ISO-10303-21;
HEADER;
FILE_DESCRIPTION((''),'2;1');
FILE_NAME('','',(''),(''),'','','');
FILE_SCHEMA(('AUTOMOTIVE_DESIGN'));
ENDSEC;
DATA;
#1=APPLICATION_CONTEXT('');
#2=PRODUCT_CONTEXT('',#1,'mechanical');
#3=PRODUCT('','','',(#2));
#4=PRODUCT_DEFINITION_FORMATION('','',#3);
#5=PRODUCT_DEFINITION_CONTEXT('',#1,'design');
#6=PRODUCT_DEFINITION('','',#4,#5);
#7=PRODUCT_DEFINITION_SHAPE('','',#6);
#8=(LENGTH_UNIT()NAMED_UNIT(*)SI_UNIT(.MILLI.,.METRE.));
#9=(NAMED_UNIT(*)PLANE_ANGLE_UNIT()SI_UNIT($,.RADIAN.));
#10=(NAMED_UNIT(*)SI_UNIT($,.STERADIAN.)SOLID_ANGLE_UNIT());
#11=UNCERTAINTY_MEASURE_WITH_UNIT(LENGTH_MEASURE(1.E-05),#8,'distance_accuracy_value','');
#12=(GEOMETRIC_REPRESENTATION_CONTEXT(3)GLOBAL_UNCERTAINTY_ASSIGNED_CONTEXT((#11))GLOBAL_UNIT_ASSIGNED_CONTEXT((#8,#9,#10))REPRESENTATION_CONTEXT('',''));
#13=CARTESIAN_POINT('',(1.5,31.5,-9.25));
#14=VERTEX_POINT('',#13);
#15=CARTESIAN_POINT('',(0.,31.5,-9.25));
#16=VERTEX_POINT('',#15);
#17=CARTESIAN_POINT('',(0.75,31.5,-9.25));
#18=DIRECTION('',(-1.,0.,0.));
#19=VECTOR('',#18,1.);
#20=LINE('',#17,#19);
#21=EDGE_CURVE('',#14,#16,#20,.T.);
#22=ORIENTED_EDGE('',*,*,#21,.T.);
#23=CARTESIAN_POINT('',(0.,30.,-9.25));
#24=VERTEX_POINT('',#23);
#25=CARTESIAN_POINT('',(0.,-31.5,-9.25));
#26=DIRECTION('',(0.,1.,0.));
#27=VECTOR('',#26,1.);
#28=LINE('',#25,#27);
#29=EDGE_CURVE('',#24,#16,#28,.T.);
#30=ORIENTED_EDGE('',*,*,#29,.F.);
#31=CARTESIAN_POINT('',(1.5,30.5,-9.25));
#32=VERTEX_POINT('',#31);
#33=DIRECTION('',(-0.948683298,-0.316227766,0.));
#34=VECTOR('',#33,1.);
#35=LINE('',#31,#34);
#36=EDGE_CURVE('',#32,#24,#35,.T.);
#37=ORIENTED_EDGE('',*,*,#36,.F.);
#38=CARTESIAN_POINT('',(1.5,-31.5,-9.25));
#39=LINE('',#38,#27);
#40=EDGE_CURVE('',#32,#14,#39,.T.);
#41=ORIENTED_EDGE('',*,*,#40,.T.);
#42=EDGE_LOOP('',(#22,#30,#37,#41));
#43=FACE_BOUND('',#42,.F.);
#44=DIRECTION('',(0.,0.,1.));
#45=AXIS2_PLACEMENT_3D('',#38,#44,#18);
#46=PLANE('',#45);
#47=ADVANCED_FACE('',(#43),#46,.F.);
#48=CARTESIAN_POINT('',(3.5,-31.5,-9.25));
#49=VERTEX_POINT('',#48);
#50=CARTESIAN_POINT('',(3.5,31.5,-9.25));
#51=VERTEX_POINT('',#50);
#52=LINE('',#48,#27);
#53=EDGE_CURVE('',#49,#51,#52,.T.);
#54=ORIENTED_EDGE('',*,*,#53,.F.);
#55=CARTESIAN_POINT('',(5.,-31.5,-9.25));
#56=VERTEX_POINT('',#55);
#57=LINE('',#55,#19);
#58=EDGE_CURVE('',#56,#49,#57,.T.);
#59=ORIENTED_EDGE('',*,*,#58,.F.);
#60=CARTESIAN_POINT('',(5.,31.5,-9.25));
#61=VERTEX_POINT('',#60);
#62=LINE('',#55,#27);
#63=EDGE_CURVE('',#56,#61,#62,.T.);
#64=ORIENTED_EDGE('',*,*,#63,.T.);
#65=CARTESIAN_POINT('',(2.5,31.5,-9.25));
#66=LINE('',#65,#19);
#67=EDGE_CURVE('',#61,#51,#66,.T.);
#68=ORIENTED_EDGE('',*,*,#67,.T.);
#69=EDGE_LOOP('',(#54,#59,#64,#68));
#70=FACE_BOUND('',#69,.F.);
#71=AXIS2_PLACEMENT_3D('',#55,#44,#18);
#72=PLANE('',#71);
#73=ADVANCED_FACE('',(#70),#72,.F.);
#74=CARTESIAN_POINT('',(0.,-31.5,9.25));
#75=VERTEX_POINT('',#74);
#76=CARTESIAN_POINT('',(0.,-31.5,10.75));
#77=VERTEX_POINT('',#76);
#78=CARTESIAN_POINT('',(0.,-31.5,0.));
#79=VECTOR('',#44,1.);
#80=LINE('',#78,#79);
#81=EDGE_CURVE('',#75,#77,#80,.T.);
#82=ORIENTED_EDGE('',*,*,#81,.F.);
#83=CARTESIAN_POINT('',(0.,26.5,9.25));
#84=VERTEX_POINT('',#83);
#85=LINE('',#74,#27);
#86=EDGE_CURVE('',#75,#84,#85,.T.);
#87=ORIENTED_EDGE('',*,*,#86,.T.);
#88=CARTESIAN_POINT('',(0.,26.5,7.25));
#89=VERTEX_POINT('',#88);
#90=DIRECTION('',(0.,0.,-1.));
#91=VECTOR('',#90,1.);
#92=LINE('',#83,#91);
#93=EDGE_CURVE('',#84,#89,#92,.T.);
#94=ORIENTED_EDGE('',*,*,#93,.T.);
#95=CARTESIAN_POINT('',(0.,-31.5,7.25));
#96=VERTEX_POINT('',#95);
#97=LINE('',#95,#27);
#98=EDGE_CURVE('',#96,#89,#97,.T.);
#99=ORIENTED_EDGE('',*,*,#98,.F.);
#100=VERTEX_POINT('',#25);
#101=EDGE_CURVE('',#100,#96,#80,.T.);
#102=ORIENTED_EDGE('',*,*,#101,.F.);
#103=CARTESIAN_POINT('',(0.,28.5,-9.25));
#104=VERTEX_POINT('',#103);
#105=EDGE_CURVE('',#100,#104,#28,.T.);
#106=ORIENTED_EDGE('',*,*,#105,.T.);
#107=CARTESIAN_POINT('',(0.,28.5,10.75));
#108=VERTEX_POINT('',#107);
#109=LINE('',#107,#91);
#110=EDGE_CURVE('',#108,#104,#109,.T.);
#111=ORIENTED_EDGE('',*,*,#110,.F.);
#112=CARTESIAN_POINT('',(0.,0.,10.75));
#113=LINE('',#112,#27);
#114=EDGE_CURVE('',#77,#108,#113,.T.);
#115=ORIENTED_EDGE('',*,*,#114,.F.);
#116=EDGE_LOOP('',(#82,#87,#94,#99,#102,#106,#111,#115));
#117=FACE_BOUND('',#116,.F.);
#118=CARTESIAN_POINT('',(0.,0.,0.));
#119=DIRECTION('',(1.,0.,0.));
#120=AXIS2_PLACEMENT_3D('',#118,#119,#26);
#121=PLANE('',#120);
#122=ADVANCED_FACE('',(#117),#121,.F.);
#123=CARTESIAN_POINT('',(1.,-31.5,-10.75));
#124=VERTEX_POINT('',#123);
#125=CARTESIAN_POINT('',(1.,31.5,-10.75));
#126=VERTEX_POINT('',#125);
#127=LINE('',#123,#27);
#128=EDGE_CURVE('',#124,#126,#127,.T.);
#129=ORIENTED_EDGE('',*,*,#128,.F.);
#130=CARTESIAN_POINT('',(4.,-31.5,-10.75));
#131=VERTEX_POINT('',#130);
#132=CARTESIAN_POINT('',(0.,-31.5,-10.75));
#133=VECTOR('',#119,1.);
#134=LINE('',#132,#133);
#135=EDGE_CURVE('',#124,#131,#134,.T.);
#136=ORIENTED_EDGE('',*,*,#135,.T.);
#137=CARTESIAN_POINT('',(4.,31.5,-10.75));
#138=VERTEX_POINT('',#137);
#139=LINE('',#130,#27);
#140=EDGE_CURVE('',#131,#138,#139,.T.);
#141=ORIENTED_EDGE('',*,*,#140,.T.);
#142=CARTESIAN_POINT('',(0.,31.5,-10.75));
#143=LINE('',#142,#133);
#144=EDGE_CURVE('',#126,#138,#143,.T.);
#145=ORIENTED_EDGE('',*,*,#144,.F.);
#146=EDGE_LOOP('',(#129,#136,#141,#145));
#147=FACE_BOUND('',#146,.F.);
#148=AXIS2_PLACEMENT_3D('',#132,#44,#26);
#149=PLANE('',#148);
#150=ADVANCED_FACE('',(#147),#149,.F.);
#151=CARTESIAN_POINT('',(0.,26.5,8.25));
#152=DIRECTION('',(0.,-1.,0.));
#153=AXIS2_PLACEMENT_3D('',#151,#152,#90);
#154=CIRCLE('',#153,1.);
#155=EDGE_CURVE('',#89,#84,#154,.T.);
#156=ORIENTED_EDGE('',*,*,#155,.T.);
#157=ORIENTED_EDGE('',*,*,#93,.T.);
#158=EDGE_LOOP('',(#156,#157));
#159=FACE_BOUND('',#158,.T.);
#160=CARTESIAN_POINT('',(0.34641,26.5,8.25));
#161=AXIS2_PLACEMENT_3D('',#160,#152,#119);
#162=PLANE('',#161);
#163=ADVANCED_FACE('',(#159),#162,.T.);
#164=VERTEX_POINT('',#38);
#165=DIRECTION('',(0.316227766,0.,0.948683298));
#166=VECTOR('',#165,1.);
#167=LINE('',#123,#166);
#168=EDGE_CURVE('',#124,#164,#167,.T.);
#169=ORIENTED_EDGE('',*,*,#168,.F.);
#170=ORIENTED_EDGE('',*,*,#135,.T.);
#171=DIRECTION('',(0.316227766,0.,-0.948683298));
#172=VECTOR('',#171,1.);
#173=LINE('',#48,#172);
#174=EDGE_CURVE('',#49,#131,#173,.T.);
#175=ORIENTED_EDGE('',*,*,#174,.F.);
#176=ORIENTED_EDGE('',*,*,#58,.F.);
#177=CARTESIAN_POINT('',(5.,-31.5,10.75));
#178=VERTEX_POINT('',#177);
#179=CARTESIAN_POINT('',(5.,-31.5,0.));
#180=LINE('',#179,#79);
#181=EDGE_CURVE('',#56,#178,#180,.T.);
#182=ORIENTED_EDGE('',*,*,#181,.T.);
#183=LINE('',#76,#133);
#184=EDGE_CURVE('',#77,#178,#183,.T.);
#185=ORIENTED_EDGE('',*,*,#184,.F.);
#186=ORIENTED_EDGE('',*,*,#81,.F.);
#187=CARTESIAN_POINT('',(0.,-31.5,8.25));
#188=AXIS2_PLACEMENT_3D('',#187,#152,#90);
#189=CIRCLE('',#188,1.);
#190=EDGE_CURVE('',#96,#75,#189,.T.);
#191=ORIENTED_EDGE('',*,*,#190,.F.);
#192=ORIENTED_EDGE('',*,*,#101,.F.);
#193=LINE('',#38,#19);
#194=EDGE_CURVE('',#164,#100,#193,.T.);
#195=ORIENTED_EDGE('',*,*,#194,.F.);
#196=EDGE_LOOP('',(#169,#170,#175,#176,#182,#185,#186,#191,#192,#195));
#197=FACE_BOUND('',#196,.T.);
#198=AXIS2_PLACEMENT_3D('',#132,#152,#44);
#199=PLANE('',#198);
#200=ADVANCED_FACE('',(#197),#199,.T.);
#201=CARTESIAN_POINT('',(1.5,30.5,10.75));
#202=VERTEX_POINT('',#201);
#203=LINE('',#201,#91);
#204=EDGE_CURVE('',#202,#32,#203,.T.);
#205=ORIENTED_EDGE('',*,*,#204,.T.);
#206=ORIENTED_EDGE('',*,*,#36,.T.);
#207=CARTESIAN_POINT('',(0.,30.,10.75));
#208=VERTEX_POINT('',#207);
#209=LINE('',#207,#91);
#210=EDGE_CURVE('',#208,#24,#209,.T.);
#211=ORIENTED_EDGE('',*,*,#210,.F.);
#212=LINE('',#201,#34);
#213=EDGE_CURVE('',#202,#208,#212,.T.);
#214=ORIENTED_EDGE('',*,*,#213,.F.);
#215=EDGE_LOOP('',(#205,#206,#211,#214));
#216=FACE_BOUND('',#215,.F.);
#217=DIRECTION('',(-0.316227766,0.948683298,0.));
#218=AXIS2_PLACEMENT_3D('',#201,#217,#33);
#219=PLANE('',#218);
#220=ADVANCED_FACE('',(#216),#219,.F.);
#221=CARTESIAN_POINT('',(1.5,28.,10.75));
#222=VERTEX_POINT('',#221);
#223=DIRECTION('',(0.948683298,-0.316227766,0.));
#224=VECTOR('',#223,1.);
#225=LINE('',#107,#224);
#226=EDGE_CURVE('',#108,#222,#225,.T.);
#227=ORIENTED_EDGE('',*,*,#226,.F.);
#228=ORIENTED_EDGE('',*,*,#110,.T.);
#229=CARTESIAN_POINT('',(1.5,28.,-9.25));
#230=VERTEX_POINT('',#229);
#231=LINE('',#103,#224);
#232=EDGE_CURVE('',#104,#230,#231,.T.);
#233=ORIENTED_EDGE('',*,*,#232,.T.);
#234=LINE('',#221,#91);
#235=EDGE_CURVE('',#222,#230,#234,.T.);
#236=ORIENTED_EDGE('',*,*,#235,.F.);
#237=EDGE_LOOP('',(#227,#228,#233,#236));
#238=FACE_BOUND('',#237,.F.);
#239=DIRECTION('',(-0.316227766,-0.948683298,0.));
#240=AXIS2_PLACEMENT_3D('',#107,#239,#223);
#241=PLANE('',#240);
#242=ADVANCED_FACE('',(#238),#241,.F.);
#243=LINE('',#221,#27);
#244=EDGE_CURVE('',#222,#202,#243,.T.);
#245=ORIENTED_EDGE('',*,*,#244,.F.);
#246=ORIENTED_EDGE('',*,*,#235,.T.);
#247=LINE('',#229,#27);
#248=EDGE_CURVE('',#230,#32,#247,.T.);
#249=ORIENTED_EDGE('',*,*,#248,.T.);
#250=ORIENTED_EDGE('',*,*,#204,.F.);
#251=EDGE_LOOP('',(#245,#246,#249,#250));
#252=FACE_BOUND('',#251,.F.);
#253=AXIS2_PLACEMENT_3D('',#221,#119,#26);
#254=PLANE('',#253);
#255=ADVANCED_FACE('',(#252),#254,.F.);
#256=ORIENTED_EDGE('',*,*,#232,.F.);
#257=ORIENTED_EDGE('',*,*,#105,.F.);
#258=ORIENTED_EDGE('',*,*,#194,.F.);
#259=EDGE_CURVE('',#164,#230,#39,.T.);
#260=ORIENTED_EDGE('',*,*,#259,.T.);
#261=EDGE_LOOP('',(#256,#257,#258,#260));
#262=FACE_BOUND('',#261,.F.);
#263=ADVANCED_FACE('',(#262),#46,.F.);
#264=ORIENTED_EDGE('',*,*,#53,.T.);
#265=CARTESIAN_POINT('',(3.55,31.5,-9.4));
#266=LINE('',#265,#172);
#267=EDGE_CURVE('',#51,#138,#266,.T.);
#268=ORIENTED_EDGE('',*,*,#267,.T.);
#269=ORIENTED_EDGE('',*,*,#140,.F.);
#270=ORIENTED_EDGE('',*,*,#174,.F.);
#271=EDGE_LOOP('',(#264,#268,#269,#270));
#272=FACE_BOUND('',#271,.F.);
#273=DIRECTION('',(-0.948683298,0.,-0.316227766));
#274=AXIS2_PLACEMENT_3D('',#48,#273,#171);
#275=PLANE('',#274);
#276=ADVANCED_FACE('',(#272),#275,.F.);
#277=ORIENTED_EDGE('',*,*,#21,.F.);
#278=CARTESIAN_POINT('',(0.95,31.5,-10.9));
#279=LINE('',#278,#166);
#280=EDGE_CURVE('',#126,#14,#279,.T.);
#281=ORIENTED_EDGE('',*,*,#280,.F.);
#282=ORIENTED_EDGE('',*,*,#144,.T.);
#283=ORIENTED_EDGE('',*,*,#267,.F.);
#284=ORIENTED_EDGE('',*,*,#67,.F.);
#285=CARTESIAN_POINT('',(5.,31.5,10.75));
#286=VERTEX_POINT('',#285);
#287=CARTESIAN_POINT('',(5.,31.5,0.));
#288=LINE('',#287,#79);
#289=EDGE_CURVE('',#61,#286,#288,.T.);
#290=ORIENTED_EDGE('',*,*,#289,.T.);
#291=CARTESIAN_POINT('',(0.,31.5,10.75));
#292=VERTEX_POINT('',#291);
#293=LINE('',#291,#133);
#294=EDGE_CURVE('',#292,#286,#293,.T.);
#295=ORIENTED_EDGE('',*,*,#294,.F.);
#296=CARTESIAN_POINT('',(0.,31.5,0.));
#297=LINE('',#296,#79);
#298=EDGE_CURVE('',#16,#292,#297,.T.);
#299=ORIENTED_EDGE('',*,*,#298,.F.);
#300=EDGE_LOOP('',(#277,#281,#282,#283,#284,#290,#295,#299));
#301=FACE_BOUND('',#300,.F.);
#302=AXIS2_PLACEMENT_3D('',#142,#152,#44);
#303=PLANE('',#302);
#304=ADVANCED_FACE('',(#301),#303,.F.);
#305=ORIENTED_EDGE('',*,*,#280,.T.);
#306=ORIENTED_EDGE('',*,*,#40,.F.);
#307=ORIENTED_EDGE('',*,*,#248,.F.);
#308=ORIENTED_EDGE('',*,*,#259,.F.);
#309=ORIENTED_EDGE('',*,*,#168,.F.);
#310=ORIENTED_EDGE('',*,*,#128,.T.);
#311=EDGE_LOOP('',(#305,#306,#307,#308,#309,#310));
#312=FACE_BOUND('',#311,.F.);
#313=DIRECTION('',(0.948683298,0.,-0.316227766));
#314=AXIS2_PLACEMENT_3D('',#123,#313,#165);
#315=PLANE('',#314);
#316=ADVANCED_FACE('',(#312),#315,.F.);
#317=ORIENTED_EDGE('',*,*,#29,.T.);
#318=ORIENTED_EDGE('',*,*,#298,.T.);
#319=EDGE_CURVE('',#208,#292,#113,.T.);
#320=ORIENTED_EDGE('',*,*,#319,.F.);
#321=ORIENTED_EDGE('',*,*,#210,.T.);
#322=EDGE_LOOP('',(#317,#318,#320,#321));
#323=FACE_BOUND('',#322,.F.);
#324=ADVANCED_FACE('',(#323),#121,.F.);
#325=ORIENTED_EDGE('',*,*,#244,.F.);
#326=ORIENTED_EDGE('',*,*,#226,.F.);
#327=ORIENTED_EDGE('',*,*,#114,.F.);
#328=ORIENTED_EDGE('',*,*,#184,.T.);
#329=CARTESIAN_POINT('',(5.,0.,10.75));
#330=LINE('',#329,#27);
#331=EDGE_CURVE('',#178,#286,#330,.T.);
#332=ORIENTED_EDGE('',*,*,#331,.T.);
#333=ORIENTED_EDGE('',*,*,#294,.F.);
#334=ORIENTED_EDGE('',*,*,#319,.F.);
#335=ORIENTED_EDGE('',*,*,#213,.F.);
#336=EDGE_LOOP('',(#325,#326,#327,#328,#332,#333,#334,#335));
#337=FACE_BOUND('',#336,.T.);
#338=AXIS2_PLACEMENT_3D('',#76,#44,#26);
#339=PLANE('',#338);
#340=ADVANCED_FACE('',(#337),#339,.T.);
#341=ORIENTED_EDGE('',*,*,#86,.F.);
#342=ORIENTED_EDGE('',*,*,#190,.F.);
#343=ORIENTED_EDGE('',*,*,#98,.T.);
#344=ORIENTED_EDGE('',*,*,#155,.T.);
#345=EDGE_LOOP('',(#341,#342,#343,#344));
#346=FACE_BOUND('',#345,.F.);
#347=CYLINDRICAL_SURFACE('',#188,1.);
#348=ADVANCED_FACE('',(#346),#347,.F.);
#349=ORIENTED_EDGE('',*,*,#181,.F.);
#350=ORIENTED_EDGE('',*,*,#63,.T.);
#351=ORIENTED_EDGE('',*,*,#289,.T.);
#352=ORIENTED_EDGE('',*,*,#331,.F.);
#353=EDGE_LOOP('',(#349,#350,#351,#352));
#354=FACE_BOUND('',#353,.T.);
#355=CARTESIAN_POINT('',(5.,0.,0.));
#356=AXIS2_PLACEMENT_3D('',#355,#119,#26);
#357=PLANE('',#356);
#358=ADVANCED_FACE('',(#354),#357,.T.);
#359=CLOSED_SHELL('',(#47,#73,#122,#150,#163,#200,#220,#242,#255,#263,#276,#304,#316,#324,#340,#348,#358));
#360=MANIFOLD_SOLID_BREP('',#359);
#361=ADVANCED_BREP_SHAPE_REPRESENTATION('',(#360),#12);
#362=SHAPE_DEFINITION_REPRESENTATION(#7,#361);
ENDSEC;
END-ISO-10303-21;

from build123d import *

# Parameters (mm, degrees)
F0_W     = 63
F0_H     = 21.5
F1_DEPTH = 5
F3_DEPTH = 63.001
F4_DEPTH = 58
F6_DEPTH = 20


# Not quite as in the source:
# - a feature names something its author has since deleted; it is built from what else it names


with BuildPart() as f1:
    # F0 (on Right) → F1 (new body)
    with BuildSketch(Plane.YZ):
        Rectangle(F0_W, F0_H)
    extrude(amount=F1_DEPTH)

    # F2 (on face) → F3 (cut, through all)
    with BuildSketch(Plane.XZ.offset(31.5)):
        Polygon((1.5, -9.25), (0, -9.25), (0, -10.75), (1, -10.75), align=None)
        Polygon((3.5, -9.25), (4, -10.75), (5, -10.75), (5, -9.25), align=None)
    extrude(amount=-F3_DEPTH, mode=Mode.SUBTRACT)

    # F2 (on face) → F4 (cut)
    with BuildSketch(Plane.XZ.offset(31.5)):
        with BuildLine():
            Line((0, 9.25), (0, 7.25))
            ThreePointArc((0, 7.25), (1, 8.25), (0, 9.25))
        make_face()
    extrude(amount=-F4_DEPTH, mode=Mode.SUBTRACT)

    # F5 (on face) → F6 (cut, through all)
    with BuildSketch(Plane.XY.offset(10.75)):
        Polygon((1.5, 30.5), (0, 30), (0, 28.5), (1.5, 28), align=None)
    extrude(amount=-F6_DEPTH, mode=Mode.SUBTRACT)


solid = f1.part
